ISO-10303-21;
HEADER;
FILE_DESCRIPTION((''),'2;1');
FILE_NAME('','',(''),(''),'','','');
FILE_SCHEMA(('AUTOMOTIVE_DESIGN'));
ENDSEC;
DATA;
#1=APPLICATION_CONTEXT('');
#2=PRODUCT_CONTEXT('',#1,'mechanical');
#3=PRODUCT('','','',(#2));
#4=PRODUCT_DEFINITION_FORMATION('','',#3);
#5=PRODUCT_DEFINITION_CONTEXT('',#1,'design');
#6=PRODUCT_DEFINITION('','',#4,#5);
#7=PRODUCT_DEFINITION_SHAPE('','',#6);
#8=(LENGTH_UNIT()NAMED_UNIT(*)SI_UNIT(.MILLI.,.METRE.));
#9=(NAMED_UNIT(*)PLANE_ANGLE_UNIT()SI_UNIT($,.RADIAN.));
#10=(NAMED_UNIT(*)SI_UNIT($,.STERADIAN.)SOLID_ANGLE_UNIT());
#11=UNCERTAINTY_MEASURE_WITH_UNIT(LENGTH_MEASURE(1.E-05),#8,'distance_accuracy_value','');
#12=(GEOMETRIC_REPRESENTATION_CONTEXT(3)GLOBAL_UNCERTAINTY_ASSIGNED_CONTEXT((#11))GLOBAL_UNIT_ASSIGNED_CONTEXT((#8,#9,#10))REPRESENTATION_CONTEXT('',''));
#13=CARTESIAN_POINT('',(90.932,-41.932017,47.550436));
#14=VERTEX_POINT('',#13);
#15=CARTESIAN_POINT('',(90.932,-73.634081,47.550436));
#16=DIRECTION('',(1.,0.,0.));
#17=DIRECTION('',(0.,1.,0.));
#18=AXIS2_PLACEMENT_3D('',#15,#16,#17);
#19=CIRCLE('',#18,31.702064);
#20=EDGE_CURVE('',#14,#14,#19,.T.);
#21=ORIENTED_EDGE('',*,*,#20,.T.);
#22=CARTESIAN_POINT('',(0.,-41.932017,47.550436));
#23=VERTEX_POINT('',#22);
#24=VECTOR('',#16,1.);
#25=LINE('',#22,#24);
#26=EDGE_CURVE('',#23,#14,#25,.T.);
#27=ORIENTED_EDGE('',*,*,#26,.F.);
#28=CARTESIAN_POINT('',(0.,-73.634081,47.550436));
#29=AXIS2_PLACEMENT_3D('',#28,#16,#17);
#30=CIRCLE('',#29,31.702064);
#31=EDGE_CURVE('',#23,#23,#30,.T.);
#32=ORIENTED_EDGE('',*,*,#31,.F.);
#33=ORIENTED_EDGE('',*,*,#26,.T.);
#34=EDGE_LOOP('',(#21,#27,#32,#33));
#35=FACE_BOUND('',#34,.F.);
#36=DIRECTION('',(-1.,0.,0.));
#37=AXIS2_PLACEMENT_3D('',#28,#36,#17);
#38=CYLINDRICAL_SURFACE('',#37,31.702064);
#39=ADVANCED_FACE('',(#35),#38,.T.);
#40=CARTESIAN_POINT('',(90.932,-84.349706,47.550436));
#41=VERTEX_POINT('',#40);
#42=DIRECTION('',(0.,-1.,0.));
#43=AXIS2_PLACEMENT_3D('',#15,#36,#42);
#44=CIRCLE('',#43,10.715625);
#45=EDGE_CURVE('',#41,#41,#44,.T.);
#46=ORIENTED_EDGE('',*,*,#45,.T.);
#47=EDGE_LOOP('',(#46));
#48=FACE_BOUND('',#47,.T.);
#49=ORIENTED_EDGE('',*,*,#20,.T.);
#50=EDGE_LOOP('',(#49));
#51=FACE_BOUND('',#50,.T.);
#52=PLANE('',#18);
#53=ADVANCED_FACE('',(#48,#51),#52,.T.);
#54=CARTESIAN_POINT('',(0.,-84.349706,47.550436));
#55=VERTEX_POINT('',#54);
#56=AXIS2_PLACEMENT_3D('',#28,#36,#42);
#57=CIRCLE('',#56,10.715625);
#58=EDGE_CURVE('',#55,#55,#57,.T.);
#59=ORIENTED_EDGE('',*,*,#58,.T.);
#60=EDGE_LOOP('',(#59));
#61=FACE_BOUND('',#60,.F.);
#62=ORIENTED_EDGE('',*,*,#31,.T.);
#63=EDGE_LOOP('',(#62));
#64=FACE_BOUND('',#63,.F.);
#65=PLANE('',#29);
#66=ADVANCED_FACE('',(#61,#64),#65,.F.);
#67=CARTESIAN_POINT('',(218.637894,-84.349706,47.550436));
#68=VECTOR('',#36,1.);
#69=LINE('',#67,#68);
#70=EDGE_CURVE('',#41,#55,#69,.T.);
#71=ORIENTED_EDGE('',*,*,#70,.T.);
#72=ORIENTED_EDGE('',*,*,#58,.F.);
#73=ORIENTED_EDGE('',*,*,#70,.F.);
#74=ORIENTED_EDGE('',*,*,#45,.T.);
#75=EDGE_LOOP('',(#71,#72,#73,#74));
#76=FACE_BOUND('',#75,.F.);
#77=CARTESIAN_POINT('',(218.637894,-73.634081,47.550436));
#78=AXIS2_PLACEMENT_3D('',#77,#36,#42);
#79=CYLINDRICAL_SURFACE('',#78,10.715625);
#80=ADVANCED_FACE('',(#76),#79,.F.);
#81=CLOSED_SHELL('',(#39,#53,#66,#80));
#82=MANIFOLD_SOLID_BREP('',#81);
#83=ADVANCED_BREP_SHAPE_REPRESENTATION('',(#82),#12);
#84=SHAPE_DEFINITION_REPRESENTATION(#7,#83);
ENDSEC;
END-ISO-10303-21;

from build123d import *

# Parameters (mm, degrees)
F0_R     = 31.7020637967
F1_DEPTH = 90.932
F3_D     = 21.43125


# Not quite as in the source:
# - a length typed as a fraction of an inch, garbled in the dataset ("3 / 203.2 mm" for 3/8 in), is restored


with BuildPart() as f1:
    # F0 (on Right) → F1 (new body)
    with BuildSketch(Plane.YZ):
        with Locations((-73.6340805888, 47.5504361093)):
            Circle(F0_R)
    extrude(amount=F1_DEPTH)

    # F3 (through all)
    with Locations(Plane.YZ.offset(90.932)):
        with Locations((-73.6340805888, 47.5504361093)):
            Hole(F3_D / 2)


solid = f1.part
